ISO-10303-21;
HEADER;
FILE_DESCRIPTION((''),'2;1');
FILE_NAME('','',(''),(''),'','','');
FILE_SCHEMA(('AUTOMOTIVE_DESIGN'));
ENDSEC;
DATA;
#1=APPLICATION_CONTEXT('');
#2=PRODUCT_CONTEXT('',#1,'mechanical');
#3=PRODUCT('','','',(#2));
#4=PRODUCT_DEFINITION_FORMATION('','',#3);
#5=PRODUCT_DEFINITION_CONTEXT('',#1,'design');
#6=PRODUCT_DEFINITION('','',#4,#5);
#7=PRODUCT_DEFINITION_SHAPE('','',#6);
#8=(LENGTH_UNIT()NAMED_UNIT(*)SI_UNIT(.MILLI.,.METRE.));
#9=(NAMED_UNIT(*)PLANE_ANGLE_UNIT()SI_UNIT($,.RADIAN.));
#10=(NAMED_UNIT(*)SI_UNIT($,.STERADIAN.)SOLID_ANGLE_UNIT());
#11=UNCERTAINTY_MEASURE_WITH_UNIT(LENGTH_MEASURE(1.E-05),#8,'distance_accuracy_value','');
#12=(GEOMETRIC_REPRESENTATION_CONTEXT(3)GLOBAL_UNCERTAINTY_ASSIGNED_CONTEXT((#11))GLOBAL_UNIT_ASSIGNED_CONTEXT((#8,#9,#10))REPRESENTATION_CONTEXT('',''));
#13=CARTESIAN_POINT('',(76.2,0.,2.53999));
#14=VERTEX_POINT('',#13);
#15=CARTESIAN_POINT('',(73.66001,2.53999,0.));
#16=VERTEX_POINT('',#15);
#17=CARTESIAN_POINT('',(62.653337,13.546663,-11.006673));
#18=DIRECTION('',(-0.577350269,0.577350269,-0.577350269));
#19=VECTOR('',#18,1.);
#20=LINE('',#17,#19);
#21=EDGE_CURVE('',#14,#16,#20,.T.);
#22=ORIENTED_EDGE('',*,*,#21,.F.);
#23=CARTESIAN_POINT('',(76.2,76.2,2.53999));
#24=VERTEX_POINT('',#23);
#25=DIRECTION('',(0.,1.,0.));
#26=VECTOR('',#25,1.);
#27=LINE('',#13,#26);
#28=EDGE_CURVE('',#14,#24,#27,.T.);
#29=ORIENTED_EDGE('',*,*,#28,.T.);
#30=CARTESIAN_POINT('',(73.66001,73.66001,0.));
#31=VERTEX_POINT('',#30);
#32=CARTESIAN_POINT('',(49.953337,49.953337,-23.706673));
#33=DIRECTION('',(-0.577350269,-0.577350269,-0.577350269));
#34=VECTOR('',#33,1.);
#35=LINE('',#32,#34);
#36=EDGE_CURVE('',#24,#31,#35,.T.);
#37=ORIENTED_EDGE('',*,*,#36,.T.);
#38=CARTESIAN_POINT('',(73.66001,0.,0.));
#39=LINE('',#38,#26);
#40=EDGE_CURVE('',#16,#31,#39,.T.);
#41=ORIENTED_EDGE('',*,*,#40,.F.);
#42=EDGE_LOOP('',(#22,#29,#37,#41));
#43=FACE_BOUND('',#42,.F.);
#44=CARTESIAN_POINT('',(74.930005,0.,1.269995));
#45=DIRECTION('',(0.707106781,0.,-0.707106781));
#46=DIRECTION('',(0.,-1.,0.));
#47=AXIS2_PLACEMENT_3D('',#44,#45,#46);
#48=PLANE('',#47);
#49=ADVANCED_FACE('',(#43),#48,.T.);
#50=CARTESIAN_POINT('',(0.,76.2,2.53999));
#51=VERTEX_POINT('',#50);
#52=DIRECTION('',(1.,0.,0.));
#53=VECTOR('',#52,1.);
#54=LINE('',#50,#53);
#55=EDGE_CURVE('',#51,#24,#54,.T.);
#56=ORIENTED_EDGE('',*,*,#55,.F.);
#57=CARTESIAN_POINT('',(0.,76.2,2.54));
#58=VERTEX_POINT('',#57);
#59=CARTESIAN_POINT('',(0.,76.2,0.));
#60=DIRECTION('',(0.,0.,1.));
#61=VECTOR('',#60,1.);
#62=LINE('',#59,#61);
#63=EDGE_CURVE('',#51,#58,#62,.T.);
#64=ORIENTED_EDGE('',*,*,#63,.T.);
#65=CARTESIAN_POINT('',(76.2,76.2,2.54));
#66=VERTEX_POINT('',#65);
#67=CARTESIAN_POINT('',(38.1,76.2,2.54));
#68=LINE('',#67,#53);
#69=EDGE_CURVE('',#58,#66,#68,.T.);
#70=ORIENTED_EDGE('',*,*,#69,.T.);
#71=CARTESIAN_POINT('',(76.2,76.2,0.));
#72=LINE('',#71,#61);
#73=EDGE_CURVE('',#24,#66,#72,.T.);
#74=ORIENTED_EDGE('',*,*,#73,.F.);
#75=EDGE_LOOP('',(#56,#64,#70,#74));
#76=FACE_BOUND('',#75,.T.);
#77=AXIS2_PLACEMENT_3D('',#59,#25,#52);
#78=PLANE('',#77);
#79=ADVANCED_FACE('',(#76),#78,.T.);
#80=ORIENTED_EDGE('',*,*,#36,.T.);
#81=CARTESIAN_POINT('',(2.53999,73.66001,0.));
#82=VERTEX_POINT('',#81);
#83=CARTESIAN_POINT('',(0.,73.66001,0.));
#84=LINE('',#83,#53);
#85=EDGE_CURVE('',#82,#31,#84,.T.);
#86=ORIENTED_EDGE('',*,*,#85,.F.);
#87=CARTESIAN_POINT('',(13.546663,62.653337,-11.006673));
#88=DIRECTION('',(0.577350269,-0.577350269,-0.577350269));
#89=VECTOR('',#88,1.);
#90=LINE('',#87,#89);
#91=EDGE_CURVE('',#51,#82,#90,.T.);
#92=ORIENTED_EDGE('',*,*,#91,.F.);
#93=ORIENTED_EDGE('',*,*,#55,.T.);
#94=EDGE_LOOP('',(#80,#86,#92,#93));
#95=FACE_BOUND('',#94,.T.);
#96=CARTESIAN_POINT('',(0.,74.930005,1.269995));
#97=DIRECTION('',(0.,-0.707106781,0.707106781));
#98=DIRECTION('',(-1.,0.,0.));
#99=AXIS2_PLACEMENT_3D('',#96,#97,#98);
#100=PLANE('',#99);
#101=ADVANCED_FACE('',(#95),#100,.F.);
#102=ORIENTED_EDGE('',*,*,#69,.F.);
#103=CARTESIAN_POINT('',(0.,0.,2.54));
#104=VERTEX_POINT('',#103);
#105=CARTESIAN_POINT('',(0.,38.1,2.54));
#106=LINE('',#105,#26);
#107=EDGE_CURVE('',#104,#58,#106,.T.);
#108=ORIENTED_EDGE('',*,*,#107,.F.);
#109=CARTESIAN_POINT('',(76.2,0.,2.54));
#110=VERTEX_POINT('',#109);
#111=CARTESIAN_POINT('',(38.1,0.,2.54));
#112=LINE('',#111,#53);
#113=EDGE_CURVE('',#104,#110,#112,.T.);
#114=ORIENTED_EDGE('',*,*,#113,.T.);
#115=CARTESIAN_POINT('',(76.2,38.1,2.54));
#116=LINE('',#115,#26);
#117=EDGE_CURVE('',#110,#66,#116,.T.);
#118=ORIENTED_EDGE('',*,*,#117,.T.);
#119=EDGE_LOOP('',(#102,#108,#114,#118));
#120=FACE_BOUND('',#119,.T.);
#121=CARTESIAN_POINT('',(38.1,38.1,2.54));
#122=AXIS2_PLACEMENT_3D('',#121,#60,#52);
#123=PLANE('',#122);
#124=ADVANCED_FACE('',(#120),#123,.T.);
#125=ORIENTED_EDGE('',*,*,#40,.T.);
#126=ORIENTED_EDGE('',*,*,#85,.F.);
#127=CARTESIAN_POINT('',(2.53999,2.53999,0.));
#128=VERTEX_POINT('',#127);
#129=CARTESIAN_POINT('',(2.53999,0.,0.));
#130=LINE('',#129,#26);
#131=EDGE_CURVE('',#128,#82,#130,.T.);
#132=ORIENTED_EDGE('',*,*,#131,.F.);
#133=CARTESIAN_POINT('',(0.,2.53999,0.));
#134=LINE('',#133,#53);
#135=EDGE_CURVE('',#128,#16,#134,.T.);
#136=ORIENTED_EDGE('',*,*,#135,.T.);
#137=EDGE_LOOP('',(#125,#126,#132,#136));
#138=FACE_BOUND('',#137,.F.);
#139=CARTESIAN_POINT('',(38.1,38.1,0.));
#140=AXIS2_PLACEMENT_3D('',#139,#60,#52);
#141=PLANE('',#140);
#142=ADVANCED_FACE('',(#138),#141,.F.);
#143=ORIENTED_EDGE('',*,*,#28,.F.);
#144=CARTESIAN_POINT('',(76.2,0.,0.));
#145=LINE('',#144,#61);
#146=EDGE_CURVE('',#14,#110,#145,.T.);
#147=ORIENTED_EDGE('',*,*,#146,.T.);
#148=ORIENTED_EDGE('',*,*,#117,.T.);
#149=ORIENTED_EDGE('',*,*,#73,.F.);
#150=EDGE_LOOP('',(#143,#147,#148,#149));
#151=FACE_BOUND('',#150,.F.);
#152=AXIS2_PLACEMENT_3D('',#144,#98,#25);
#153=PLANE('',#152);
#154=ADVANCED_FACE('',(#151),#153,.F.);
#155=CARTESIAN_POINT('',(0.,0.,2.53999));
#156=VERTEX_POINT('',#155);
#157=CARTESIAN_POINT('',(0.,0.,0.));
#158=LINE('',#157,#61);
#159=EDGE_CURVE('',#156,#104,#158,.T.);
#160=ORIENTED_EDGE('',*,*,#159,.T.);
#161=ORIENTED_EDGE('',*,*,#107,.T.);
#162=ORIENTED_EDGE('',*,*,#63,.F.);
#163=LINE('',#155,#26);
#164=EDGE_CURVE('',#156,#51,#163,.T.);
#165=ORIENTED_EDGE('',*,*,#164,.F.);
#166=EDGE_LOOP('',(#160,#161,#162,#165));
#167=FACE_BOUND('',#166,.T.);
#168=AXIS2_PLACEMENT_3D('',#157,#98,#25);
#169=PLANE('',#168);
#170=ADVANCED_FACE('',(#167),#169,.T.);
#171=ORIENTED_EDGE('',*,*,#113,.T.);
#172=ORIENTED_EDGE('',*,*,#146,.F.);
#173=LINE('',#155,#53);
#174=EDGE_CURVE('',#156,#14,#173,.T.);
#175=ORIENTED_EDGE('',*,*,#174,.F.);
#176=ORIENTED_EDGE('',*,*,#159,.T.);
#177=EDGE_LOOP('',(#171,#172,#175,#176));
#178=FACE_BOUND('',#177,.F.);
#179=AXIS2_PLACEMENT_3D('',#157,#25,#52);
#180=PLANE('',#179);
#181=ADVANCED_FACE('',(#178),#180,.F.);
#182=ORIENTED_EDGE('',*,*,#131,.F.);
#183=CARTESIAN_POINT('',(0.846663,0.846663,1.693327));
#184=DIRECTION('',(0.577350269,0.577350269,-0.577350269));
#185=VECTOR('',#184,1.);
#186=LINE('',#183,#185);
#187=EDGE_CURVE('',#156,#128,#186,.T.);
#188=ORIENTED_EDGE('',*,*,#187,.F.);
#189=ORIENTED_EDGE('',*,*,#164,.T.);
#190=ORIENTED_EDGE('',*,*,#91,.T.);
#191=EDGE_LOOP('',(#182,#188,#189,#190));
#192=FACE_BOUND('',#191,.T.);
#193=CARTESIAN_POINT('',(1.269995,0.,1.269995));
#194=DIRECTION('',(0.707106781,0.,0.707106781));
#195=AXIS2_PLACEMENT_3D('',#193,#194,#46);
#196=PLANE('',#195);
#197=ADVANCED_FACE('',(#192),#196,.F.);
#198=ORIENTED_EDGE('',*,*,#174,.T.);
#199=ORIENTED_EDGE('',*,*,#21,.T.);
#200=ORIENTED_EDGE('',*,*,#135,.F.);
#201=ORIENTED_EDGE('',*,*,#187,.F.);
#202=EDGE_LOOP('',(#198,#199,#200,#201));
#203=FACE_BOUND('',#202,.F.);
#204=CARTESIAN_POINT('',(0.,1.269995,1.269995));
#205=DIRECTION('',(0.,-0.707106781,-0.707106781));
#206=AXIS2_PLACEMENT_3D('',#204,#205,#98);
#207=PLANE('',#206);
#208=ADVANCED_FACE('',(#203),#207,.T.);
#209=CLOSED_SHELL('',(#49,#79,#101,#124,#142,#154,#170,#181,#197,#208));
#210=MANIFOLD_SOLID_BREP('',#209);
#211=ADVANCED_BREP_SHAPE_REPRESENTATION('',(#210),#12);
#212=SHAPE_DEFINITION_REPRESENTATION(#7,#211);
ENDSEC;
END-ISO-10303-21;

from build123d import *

# Parameters (mm, degrees)
F0_W     = 76.2
F0_H     = 76.2
F1_DEPTH = 2.54
F2_SIZE  = 2.53999


# Not quite as in the source:
# - a fillet or chamfer is up to 0.001 mm smaller than in the source, because OpenCascade refuses the exact size


with BuildPart() as f1:
    # F0 (on Top) → F1 (new body)
    with BuildSketch(Plane.XY):
        with Locations((38.1, 38.1)):
            Rectangle(F0_W, F0_H)
    extrude(amount=F1_DEPTH)

    # F2 (size 2.54 in the source; OpenCascade refuses exactly that, so slightly less here)
    f2_edges = [f1.edges().sort_by_distance(p)[0] for p in [
        (0, 38.1, 0),
        (38.1, 0, 0),
        (76.2, 38.1, 0),
        (38.1, 76.2, 0),
    ]]
    chamfer(f2_edges, length=F2_SIZE)


solid = f1.part
